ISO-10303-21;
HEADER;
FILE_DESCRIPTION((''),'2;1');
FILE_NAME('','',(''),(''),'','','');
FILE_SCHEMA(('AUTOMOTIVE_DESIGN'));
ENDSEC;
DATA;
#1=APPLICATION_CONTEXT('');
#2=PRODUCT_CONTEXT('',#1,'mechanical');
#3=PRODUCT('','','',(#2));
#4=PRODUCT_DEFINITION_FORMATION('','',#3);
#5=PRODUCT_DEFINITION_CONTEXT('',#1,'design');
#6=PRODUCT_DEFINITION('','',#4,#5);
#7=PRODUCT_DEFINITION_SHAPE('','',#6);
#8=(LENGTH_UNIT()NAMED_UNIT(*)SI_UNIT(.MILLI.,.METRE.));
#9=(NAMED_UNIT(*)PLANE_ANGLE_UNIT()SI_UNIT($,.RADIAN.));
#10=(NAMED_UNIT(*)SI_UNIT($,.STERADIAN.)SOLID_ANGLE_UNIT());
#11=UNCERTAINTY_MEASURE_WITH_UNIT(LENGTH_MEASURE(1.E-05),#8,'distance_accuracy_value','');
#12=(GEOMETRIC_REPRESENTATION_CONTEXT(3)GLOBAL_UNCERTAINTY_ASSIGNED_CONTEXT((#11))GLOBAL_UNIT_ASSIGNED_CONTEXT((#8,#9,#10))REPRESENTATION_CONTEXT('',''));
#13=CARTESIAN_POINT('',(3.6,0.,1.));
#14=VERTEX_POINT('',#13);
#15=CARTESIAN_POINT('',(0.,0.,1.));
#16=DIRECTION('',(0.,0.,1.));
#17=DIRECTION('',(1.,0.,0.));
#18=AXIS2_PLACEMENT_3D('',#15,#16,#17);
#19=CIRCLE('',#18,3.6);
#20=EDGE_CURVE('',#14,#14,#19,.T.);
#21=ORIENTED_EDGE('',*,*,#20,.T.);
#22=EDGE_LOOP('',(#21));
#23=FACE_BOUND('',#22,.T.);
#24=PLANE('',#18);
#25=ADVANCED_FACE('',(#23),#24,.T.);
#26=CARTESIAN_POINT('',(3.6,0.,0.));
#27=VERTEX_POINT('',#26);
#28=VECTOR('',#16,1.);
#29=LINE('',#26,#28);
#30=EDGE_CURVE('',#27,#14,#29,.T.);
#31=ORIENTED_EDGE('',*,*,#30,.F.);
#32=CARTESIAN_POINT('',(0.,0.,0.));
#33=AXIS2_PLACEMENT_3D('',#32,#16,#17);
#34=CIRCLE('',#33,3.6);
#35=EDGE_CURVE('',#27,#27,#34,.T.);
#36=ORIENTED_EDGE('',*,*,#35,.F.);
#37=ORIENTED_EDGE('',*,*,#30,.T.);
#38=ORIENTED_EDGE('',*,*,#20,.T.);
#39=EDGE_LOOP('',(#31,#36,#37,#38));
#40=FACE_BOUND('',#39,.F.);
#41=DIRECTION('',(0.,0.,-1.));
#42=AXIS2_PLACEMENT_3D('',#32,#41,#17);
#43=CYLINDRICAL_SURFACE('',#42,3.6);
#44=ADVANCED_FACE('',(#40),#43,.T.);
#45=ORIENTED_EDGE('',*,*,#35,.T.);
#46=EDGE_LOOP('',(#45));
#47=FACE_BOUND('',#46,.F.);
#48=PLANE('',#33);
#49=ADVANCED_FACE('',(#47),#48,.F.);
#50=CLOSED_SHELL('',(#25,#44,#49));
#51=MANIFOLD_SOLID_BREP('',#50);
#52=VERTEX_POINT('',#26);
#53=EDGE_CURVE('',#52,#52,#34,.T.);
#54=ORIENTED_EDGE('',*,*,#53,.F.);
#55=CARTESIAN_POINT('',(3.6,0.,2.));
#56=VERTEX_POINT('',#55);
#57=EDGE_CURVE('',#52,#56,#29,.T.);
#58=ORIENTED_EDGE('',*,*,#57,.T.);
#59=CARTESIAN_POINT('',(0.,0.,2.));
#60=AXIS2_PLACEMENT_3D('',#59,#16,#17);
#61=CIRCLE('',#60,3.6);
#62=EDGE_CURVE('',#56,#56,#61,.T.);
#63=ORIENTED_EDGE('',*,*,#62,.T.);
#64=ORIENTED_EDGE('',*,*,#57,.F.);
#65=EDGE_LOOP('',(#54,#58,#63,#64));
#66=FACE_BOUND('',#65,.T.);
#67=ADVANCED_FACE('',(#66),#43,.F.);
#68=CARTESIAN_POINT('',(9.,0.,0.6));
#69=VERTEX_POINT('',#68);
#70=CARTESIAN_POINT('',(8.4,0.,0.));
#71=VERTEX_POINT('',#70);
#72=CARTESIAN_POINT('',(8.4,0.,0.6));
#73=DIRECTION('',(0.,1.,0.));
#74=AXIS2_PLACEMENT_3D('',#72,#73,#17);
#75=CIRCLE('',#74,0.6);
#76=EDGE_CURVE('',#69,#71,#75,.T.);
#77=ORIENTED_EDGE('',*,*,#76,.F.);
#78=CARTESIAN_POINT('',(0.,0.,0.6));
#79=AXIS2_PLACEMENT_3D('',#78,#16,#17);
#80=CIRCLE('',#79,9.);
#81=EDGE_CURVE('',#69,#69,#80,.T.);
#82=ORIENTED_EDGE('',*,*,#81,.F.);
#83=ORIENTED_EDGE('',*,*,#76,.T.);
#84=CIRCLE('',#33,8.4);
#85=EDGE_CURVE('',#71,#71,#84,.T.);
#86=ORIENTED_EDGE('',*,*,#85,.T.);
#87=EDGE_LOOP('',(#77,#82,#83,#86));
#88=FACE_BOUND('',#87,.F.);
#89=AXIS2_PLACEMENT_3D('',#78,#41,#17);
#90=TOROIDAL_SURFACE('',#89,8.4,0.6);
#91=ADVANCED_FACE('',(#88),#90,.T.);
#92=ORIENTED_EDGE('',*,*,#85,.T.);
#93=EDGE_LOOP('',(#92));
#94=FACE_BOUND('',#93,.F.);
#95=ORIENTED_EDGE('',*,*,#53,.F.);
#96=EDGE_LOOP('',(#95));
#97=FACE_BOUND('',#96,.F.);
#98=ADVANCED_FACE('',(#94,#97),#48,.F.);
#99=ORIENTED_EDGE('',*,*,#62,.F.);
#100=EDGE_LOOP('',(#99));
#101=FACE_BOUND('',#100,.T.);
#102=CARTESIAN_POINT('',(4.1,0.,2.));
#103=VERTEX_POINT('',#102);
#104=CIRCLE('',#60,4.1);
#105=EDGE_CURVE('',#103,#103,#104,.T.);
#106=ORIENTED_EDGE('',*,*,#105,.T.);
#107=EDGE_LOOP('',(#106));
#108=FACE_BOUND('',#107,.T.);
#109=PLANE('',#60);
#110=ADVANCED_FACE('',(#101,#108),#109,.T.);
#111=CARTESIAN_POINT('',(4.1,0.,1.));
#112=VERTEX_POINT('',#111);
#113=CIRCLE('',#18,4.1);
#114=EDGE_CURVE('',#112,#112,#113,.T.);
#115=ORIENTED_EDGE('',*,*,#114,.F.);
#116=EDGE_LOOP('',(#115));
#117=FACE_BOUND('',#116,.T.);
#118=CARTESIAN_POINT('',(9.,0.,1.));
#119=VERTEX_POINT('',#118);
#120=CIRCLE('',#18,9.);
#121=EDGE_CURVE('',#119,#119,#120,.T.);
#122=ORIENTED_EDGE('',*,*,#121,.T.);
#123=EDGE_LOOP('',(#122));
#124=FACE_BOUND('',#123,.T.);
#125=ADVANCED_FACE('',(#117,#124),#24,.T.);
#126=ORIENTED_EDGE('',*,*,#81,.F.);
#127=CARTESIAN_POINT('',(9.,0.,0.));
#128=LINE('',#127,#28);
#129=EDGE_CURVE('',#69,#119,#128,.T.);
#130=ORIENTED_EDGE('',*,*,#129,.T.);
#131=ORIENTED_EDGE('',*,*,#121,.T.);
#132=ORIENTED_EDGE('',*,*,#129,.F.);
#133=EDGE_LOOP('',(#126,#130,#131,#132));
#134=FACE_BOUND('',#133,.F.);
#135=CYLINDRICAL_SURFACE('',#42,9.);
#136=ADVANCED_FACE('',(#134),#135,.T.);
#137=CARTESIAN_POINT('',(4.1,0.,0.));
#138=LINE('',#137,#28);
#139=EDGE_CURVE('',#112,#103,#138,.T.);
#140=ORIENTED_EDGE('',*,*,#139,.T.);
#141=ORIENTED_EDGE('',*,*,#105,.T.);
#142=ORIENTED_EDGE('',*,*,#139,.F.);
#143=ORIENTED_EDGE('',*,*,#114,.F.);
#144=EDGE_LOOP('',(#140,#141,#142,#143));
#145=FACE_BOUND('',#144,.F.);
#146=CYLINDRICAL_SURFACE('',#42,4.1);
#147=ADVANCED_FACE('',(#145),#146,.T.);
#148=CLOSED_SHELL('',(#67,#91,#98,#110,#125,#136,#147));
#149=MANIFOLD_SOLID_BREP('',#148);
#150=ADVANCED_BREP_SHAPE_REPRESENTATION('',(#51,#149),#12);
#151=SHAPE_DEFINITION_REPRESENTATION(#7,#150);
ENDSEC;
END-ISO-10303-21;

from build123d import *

# Parameters (mm, degrees)
F0_R     = 9
F0_R_2   = 4.1
F1_DEPTH = 1
F0_R_3   = 3.6
F2_DEPTH = 2
F3_R     = 0.6


with BuildPart() as f1:
    # F0 (on Top) → F1 (new body)
    with BuildSketch(Plane.XY):
        Circle(F0_R)
        Circle(F0_R_2, mode=Mode.SUBTRACT)
    extrude(amount=F1_DEPTH)

    # F0 (on Top) → F2 (join)
    with BuildSketch(Plane.XY):
        Circle(F0_R_2)
        Circle(F0_R_3, mode=Mode.SUBTRACT)
    extrude(amount=F2_DEPTH)

    # F3
    f3_edges = [f1.edges().sort_by_distance(p)[0] for p in [
        (-9, 0, 0),
    ]]
    fillet(f3_edges, radius=F3_R)


with BuildPart() as f1b:
    # F0 (on Top) → F1, piece 2 (new body)
    with BuildSketch(Plane.XY):
        Circle(F0_R_3)
    extrude(amount=F1_DEPTH)


solid = Compound([f1.part, f1b.part])
